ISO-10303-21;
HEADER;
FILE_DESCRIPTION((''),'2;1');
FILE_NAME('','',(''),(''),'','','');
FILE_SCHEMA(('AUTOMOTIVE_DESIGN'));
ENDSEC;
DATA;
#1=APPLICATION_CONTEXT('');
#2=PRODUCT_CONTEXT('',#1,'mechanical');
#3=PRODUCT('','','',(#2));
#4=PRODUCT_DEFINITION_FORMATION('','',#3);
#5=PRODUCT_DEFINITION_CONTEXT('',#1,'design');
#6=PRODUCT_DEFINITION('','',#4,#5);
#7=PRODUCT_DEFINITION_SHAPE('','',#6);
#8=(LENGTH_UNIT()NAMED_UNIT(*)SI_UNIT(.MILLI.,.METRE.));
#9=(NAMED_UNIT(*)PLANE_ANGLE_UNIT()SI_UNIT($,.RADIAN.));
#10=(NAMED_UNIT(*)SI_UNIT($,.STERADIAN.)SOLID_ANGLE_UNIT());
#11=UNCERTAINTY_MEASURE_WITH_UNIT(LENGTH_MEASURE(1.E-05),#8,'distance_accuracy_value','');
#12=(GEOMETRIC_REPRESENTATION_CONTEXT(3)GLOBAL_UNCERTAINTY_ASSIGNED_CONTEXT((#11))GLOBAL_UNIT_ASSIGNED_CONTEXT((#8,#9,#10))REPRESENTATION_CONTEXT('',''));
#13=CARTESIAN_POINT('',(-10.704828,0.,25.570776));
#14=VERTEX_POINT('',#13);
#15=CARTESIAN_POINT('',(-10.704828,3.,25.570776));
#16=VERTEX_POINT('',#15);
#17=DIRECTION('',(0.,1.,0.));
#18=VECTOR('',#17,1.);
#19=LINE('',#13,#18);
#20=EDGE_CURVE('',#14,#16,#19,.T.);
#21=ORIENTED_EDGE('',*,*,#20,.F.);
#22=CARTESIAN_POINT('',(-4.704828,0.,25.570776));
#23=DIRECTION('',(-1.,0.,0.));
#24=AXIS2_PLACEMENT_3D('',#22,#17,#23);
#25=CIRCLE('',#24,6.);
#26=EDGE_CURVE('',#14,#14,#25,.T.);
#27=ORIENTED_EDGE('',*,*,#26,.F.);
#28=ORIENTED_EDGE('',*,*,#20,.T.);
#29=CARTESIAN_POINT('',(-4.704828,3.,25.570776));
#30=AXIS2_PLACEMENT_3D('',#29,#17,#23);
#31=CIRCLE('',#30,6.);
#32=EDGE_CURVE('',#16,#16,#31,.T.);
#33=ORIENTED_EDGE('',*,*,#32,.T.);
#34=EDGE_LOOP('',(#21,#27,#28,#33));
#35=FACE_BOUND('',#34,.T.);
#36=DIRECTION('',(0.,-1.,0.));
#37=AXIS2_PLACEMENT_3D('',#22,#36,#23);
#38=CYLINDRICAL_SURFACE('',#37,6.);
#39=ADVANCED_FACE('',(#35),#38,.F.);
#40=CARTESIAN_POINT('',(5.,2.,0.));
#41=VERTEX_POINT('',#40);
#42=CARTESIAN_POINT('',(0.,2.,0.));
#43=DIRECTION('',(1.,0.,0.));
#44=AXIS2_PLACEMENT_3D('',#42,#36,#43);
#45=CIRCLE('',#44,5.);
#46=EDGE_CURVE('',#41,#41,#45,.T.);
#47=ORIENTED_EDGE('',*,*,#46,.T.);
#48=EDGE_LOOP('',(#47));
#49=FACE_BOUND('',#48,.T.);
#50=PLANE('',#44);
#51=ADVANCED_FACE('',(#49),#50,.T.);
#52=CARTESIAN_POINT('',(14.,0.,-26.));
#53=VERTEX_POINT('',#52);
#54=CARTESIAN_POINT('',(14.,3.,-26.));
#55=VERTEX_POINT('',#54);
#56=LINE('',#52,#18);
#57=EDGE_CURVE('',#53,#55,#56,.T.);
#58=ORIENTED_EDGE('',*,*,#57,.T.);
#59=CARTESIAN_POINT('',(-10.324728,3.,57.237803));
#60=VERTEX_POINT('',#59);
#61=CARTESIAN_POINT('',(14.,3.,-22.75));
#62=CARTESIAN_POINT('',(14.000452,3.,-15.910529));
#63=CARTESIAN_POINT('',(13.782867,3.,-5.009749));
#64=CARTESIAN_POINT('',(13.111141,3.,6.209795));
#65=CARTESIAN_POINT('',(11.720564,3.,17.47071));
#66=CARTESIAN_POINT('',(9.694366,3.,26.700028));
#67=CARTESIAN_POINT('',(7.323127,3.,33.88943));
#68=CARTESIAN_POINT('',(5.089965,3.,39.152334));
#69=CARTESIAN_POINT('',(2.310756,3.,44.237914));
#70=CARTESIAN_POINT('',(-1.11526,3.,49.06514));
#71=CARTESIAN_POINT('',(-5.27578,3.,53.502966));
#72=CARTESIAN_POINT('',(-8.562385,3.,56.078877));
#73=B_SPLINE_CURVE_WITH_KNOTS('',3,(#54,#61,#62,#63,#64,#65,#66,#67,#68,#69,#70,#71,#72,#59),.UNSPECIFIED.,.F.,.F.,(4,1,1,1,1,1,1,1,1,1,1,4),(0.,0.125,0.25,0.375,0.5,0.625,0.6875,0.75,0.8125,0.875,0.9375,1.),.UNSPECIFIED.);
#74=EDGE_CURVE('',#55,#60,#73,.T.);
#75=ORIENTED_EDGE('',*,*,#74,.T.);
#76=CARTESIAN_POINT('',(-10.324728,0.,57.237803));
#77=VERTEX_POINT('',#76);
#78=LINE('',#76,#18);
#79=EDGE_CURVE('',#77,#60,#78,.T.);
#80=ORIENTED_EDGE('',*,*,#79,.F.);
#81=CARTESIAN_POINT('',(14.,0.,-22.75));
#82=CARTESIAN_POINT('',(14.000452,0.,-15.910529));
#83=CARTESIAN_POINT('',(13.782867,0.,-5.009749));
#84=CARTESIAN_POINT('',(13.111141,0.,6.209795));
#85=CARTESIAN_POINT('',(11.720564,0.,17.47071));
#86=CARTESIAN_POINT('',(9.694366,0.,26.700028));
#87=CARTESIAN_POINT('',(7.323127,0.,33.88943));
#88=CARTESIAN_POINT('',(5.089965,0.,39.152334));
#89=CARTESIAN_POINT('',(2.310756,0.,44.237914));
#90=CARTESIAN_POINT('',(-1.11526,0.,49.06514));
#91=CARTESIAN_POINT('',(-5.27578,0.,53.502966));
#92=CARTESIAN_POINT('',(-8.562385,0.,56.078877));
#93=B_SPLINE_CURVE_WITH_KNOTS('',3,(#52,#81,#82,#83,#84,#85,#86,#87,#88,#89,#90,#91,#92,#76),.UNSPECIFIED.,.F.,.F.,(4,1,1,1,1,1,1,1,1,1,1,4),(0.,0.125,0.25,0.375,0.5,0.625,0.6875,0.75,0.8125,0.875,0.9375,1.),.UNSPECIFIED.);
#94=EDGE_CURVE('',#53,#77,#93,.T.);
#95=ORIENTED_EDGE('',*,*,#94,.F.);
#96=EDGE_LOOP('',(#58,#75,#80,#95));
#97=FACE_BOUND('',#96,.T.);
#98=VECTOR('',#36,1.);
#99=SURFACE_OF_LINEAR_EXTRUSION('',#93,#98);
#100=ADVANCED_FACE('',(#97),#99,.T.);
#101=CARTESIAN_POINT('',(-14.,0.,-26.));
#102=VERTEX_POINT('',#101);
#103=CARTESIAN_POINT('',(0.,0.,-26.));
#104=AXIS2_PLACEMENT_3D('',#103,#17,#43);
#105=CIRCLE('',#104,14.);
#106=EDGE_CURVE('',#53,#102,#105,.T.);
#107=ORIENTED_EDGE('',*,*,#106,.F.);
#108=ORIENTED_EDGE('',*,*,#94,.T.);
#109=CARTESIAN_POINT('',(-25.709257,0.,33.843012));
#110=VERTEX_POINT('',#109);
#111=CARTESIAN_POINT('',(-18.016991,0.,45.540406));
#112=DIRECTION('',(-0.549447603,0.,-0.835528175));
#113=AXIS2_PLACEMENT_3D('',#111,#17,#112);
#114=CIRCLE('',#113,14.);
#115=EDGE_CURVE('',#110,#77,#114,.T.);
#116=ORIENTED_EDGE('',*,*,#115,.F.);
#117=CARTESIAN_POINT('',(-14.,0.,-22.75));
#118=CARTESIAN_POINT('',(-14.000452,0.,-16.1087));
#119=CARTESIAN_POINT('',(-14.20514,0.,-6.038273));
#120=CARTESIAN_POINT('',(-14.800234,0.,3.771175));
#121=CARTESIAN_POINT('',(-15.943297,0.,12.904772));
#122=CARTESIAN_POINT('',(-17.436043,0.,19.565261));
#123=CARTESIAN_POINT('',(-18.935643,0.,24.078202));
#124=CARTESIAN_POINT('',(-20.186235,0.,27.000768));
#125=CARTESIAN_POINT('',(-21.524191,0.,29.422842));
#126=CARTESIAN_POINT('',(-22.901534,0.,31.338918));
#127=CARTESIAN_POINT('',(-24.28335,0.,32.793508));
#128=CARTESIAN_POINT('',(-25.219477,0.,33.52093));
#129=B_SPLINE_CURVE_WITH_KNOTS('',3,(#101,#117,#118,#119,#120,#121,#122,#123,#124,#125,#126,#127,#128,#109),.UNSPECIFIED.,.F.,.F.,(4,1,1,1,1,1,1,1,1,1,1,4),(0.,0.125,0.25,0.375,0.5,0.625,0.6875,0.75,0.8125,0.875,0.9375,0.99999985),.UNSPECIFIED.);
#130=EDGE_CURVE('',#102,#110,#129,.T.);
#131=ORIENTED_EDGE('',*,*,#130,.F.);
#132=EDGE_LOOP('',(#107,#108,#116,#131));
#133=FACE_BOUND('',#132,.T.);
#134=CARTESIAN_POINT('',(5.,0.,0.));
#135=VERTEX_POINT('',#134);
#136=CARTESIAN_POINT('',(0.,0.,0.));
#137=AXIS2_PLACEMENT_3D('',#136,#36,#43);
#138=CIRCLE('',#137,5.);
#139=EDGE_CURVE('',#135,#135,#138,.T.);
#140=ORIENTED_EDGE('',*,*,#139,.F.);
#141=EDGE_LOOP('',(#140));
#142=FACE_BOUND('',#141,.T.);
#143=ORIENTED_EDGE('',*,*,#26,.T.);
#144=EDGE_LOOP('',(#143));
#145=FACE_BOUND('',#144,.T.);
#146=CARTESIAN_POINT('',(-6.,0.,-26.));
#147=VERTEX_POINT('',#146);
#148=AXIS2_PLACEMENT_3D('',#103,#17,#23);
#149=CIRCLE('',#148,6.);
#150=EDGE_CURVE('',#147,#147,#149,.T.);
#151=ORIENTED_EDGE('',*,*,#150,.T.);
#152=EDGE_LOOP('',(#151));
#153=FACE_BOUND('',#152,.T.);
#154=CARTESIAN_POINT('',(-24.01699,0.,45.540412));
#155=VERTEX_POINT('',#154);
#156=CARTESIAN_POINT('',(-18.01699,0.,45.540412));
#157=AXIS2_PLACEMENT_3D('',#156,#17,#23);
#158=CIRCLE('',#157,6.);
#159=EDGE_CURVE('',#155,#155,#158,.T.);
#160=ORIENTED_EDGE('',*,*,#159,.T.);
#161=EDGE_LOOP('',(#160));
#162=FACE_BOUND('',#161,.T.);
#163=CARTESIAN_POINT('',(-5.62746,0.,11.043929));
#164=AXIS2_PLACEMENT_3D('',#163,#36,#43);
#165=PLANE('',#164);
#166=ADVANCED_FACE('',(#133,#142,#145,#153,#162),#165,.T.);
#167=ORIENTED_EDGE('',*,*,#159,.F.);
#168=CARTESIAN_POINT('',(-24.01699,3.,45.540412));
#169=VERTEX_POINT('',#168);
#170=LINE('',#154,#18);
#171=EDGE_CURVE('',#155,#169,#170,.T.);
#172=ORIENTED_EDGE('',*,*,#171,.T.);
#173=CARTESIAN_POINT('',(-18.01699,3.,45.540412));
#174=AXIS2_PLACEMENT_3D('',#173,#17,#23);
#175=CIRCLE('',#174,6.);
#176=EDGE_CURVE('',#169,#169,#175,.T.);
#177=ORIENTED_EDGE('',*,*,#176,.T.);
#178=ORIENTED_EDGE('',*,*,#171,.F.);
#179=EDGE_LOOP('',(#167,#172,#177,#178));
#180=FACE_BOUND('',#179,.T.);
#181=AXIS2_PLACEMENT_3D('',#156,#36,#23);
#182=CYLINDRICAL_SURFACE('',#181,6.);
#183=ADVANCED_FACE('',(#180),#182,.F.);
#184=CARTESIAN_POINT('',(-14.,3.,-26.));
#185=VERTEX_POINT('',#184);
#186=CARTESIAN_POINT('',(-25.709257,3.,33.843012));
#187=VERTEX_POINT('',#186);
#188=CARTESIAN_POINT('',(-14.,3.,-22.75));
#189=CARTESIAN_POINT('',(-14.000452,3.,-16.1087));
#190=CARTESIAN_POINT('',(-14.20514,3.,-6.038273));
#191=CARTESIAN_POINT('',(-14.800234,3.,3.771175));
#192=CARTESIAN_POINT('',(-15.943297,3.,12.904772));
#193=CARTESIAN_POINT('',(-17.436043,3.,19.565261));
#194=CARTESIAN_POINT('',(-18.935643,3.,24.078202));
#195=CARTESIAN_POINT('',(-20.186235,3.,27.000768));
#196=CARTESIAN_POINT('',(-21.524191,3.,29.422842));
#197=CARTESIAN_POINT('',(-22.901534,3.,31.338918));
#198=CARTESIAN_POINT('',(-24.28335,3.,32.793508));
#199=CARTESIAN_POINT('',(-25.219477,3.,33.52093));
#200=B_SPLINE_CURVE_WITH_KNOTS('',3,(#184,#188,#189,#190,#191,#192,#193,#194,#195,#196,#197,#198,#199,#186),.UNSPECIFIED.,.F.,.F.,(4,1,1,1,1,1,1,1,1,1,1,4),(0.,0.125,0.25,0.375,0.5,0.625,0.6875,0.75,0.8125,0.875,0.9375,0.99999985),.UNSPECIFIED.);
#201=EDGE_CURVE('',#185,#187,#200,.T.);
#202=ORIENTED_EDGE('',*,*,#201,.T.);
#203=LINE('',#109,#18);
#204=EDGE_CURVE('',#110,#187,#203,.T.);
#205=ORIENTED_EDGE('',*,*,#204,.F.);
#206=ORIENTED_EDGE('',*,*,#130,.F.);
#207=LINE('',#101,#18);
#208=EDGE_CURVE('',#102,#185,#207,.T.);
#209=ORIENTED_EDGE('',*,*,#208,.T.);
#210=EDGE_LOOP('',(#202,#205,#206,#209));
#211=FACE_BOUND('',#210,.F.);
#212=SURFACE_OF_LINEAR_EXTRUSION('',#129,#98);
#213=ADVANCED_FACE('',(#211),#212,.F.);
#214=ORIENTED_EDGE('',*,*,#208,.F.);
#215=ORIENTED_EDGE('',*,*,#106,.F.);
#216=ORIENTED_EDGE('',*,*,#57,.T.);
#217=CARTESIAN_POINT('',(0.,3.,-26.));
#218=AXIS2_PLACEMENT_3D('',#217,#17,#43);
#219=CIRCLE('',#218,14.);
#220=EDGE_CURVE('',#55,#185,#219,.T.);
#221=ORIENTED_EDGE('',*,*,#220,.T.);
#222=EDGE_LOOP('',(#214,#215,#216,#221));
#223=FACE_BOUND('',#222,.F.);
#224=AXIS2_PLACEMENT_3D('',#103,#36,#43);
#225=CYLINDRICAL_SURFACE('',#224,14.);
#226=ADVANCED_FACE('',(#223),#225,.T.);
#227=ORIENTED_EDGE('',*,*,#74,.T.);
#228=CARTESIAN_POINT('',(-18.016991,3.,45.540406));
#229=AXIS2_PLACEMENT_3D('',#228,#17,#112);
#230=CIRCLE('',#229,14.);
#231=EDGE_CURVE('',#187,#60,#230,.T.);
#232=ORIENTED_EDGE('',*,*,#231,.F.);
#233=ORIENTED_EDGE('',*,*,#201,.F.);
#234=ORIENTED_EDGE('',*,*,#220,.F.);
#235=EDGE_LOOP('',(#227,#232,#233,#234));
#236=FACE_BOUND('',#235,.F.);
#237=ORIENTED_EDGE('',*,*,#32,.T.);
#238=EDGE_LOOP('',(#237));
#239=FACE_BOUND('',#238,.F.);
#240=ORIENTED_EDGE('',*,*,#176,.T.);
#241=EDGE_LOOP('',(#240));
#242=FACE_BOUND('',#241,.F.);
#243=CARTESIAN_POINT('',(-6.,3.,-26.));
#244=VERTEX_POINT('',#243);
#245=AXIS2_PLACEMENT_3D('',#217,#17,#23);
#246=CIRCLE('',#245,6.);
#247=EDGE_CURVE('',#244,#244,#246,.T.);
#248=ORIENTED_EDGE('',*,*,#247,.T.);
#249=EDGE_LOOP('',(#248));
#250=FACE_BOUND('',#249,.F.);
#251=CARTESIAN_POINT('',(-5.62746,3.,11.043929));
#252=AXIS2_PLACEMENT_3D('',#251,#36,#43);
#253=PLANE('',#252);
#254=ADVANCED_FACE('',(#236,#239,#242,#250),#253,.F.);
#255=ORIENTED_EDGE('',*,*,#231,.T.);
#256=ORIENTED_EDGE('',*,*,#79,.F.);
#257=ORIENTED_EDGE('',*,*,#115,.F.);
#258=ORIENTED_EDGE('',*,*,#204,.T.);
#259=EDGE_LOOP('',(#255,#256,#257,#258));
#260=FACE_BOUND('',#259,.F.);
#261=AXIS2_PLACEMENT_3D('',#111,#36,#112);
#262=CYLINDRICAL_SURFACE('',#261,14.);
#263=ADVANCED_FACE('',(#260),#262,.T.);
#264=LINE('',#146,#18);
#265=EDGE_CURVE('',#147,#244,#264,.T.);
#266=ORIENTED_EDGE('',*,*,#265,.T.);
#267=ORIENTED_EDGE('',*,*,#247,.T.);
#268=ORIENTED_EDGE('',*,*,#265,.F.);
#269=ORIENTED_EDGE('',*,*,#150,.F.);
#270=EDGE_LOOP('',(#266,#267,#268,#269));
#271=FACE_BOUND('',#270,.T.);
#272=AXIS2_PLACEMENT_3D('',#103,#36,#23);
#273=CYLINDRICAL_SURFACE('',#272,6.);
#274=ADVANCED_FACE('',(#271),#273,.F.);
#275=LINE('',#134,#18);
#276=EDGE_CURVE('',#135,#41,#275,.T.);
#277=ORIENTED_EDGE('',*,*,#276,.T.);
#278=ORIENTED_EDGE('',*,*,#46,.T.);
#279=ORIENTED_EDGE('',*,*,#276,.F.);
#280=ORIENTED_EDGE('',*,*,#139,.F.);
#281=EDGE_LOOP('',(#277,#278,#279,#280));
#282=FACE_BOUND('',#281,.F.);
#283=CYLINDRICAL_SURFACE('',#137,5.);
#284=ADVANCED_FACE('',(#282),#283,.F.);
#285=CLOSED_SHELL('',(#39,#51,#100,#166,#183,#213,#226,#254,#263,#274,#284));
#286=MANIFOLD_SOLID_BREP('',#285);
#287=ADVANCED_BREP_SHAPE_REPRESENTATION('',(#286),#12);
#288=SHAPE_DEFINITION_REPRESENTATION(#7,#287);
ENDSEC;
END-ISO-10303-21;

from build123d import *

# Parameters (mm, degrees)
F0_R     = 6
F1_DEPTH = 3
F3_R     = 5.5
F4_DEPTH = 2
F5_R     = 5
F6_DEPTH = 2
F9_ANGLE = 180


# Not quite as in the source:
# - ends of sketch curves that miss each other by under 0.0002 mm in the source are joined
# - the dataset's text gives a spline's control points without its knots; the knots are read off the source's solid


with BuildPart() as f1:
    # F0 (on Front) → F1 (new body)
    with BuildSketch(Plane.XZ):
        with BuildLine():
            add(Edge.make_bspline(
                [(-14, -26), (-14, -22.75), (-14.0004523743, -15.9105291262), (-13.7828666825, -5.0097493319), (-13.1111411806, 6.2097947293), (-11.720563989, 17.4707102353), (-9.6943656003, 26.7000282147), (-7.3231272908, 33.8894297819), (-5.0899646489, 39.15233442), (-2.3107556278, 44.2379137207), (1.1152604329, 49.0651401417), (5.2757801793, 53.5029660938), (8.5623848122, 56.0788774956), (10.3247279458, 57.2378033443)],
                knots=[0, 0, 0, 0, 0.125, 0.25, 0.375, 0.5, 0.625, 0.6875, 0.75, 0.8125, 0.875, 0.9375, 1, 1, 1, 1], degree=3))
            ThreePointArc((-14, -26), (0, -40), (14, -26))
            add(Edge.make_bspline(
                [(14, -26), (14, -22.75), (14.0004523743, -16.1086995406), (14.205139987, -6.0382727532), (14.8002343988, 3.7711749321), (15.9432970346, 12.9047719201), (17.4360428506, 19.5652612944), (18.9356431663, 24.0782015665), (20.186235287, 27.0007682339), (21.5241909854, 29.4228421126), (22.9015337641, 31.3389176928), (24.2833500376, 32.7935083509), (25.2194773121, 33.5209300274), (25.7092571932, 33.8430120472)],
                knots=[0, 0, 0, 0, 0.125, 0.25, 0.375, 0.5, 0.625, 0.6875, 0.75, 0.8125, 0.875, 0.9375, 0.9999998504, 0.9999998504, 0.9999998504, 0.9999998504], degree=3))
            ThreePointArc((25.7092571932, 33.8430120472), (29.7143803557, 53.2326803132), (10.3247279458, 57.2378033443))
        make_face()
        with Locations((0, -26)):
            Circle(F0_R, mode=Mode.SUBTRACT)
        with Locations((4.704827633, 25.5707762288)):
            Circle(F0_R, mode=Mode.SUBTRACT)
        with Locations((18.0169899591, 45.5404115335)):
            Circle(F0_R, mode=Mode.SUBTRACT)
    extrude(amount=F1_DEPTH)


with BuildPart() as f2_1:
    # F2: copy of F1
    add(f1.part.moved(Location((50.8967, 0, 0))))

    # F3 (on face) → F4 (cut)
    with BuildSketch(Plane.XZ.offset(3)):
        with Locations((50.8965918246, 0)):
            Circle(F3_R)
    extrude(amount=-F4_DEPTH, mode=Mode.SUBTRACT)


with BuildPart() as f1_1:
    add(f1.part)

    # F5 (on face) → F6 (cut)
    with BuildSketch(Plane(origin=(0, 0, 0), x_dir=(-1, 0, 0), z_dir=(0, 1, 0))):
        Circle(F5_R)
    extrude(amount=-F6_DEPTH, mode=Mode.SUBTRACT)


with BuildPart() as f1_2:
    # F9: moved
    add(f1_1.part.rotate(Axis((0, 0, 5.4726116359), (0, 0, -1)), F9_ANGLE))


solid = f1_2.part
